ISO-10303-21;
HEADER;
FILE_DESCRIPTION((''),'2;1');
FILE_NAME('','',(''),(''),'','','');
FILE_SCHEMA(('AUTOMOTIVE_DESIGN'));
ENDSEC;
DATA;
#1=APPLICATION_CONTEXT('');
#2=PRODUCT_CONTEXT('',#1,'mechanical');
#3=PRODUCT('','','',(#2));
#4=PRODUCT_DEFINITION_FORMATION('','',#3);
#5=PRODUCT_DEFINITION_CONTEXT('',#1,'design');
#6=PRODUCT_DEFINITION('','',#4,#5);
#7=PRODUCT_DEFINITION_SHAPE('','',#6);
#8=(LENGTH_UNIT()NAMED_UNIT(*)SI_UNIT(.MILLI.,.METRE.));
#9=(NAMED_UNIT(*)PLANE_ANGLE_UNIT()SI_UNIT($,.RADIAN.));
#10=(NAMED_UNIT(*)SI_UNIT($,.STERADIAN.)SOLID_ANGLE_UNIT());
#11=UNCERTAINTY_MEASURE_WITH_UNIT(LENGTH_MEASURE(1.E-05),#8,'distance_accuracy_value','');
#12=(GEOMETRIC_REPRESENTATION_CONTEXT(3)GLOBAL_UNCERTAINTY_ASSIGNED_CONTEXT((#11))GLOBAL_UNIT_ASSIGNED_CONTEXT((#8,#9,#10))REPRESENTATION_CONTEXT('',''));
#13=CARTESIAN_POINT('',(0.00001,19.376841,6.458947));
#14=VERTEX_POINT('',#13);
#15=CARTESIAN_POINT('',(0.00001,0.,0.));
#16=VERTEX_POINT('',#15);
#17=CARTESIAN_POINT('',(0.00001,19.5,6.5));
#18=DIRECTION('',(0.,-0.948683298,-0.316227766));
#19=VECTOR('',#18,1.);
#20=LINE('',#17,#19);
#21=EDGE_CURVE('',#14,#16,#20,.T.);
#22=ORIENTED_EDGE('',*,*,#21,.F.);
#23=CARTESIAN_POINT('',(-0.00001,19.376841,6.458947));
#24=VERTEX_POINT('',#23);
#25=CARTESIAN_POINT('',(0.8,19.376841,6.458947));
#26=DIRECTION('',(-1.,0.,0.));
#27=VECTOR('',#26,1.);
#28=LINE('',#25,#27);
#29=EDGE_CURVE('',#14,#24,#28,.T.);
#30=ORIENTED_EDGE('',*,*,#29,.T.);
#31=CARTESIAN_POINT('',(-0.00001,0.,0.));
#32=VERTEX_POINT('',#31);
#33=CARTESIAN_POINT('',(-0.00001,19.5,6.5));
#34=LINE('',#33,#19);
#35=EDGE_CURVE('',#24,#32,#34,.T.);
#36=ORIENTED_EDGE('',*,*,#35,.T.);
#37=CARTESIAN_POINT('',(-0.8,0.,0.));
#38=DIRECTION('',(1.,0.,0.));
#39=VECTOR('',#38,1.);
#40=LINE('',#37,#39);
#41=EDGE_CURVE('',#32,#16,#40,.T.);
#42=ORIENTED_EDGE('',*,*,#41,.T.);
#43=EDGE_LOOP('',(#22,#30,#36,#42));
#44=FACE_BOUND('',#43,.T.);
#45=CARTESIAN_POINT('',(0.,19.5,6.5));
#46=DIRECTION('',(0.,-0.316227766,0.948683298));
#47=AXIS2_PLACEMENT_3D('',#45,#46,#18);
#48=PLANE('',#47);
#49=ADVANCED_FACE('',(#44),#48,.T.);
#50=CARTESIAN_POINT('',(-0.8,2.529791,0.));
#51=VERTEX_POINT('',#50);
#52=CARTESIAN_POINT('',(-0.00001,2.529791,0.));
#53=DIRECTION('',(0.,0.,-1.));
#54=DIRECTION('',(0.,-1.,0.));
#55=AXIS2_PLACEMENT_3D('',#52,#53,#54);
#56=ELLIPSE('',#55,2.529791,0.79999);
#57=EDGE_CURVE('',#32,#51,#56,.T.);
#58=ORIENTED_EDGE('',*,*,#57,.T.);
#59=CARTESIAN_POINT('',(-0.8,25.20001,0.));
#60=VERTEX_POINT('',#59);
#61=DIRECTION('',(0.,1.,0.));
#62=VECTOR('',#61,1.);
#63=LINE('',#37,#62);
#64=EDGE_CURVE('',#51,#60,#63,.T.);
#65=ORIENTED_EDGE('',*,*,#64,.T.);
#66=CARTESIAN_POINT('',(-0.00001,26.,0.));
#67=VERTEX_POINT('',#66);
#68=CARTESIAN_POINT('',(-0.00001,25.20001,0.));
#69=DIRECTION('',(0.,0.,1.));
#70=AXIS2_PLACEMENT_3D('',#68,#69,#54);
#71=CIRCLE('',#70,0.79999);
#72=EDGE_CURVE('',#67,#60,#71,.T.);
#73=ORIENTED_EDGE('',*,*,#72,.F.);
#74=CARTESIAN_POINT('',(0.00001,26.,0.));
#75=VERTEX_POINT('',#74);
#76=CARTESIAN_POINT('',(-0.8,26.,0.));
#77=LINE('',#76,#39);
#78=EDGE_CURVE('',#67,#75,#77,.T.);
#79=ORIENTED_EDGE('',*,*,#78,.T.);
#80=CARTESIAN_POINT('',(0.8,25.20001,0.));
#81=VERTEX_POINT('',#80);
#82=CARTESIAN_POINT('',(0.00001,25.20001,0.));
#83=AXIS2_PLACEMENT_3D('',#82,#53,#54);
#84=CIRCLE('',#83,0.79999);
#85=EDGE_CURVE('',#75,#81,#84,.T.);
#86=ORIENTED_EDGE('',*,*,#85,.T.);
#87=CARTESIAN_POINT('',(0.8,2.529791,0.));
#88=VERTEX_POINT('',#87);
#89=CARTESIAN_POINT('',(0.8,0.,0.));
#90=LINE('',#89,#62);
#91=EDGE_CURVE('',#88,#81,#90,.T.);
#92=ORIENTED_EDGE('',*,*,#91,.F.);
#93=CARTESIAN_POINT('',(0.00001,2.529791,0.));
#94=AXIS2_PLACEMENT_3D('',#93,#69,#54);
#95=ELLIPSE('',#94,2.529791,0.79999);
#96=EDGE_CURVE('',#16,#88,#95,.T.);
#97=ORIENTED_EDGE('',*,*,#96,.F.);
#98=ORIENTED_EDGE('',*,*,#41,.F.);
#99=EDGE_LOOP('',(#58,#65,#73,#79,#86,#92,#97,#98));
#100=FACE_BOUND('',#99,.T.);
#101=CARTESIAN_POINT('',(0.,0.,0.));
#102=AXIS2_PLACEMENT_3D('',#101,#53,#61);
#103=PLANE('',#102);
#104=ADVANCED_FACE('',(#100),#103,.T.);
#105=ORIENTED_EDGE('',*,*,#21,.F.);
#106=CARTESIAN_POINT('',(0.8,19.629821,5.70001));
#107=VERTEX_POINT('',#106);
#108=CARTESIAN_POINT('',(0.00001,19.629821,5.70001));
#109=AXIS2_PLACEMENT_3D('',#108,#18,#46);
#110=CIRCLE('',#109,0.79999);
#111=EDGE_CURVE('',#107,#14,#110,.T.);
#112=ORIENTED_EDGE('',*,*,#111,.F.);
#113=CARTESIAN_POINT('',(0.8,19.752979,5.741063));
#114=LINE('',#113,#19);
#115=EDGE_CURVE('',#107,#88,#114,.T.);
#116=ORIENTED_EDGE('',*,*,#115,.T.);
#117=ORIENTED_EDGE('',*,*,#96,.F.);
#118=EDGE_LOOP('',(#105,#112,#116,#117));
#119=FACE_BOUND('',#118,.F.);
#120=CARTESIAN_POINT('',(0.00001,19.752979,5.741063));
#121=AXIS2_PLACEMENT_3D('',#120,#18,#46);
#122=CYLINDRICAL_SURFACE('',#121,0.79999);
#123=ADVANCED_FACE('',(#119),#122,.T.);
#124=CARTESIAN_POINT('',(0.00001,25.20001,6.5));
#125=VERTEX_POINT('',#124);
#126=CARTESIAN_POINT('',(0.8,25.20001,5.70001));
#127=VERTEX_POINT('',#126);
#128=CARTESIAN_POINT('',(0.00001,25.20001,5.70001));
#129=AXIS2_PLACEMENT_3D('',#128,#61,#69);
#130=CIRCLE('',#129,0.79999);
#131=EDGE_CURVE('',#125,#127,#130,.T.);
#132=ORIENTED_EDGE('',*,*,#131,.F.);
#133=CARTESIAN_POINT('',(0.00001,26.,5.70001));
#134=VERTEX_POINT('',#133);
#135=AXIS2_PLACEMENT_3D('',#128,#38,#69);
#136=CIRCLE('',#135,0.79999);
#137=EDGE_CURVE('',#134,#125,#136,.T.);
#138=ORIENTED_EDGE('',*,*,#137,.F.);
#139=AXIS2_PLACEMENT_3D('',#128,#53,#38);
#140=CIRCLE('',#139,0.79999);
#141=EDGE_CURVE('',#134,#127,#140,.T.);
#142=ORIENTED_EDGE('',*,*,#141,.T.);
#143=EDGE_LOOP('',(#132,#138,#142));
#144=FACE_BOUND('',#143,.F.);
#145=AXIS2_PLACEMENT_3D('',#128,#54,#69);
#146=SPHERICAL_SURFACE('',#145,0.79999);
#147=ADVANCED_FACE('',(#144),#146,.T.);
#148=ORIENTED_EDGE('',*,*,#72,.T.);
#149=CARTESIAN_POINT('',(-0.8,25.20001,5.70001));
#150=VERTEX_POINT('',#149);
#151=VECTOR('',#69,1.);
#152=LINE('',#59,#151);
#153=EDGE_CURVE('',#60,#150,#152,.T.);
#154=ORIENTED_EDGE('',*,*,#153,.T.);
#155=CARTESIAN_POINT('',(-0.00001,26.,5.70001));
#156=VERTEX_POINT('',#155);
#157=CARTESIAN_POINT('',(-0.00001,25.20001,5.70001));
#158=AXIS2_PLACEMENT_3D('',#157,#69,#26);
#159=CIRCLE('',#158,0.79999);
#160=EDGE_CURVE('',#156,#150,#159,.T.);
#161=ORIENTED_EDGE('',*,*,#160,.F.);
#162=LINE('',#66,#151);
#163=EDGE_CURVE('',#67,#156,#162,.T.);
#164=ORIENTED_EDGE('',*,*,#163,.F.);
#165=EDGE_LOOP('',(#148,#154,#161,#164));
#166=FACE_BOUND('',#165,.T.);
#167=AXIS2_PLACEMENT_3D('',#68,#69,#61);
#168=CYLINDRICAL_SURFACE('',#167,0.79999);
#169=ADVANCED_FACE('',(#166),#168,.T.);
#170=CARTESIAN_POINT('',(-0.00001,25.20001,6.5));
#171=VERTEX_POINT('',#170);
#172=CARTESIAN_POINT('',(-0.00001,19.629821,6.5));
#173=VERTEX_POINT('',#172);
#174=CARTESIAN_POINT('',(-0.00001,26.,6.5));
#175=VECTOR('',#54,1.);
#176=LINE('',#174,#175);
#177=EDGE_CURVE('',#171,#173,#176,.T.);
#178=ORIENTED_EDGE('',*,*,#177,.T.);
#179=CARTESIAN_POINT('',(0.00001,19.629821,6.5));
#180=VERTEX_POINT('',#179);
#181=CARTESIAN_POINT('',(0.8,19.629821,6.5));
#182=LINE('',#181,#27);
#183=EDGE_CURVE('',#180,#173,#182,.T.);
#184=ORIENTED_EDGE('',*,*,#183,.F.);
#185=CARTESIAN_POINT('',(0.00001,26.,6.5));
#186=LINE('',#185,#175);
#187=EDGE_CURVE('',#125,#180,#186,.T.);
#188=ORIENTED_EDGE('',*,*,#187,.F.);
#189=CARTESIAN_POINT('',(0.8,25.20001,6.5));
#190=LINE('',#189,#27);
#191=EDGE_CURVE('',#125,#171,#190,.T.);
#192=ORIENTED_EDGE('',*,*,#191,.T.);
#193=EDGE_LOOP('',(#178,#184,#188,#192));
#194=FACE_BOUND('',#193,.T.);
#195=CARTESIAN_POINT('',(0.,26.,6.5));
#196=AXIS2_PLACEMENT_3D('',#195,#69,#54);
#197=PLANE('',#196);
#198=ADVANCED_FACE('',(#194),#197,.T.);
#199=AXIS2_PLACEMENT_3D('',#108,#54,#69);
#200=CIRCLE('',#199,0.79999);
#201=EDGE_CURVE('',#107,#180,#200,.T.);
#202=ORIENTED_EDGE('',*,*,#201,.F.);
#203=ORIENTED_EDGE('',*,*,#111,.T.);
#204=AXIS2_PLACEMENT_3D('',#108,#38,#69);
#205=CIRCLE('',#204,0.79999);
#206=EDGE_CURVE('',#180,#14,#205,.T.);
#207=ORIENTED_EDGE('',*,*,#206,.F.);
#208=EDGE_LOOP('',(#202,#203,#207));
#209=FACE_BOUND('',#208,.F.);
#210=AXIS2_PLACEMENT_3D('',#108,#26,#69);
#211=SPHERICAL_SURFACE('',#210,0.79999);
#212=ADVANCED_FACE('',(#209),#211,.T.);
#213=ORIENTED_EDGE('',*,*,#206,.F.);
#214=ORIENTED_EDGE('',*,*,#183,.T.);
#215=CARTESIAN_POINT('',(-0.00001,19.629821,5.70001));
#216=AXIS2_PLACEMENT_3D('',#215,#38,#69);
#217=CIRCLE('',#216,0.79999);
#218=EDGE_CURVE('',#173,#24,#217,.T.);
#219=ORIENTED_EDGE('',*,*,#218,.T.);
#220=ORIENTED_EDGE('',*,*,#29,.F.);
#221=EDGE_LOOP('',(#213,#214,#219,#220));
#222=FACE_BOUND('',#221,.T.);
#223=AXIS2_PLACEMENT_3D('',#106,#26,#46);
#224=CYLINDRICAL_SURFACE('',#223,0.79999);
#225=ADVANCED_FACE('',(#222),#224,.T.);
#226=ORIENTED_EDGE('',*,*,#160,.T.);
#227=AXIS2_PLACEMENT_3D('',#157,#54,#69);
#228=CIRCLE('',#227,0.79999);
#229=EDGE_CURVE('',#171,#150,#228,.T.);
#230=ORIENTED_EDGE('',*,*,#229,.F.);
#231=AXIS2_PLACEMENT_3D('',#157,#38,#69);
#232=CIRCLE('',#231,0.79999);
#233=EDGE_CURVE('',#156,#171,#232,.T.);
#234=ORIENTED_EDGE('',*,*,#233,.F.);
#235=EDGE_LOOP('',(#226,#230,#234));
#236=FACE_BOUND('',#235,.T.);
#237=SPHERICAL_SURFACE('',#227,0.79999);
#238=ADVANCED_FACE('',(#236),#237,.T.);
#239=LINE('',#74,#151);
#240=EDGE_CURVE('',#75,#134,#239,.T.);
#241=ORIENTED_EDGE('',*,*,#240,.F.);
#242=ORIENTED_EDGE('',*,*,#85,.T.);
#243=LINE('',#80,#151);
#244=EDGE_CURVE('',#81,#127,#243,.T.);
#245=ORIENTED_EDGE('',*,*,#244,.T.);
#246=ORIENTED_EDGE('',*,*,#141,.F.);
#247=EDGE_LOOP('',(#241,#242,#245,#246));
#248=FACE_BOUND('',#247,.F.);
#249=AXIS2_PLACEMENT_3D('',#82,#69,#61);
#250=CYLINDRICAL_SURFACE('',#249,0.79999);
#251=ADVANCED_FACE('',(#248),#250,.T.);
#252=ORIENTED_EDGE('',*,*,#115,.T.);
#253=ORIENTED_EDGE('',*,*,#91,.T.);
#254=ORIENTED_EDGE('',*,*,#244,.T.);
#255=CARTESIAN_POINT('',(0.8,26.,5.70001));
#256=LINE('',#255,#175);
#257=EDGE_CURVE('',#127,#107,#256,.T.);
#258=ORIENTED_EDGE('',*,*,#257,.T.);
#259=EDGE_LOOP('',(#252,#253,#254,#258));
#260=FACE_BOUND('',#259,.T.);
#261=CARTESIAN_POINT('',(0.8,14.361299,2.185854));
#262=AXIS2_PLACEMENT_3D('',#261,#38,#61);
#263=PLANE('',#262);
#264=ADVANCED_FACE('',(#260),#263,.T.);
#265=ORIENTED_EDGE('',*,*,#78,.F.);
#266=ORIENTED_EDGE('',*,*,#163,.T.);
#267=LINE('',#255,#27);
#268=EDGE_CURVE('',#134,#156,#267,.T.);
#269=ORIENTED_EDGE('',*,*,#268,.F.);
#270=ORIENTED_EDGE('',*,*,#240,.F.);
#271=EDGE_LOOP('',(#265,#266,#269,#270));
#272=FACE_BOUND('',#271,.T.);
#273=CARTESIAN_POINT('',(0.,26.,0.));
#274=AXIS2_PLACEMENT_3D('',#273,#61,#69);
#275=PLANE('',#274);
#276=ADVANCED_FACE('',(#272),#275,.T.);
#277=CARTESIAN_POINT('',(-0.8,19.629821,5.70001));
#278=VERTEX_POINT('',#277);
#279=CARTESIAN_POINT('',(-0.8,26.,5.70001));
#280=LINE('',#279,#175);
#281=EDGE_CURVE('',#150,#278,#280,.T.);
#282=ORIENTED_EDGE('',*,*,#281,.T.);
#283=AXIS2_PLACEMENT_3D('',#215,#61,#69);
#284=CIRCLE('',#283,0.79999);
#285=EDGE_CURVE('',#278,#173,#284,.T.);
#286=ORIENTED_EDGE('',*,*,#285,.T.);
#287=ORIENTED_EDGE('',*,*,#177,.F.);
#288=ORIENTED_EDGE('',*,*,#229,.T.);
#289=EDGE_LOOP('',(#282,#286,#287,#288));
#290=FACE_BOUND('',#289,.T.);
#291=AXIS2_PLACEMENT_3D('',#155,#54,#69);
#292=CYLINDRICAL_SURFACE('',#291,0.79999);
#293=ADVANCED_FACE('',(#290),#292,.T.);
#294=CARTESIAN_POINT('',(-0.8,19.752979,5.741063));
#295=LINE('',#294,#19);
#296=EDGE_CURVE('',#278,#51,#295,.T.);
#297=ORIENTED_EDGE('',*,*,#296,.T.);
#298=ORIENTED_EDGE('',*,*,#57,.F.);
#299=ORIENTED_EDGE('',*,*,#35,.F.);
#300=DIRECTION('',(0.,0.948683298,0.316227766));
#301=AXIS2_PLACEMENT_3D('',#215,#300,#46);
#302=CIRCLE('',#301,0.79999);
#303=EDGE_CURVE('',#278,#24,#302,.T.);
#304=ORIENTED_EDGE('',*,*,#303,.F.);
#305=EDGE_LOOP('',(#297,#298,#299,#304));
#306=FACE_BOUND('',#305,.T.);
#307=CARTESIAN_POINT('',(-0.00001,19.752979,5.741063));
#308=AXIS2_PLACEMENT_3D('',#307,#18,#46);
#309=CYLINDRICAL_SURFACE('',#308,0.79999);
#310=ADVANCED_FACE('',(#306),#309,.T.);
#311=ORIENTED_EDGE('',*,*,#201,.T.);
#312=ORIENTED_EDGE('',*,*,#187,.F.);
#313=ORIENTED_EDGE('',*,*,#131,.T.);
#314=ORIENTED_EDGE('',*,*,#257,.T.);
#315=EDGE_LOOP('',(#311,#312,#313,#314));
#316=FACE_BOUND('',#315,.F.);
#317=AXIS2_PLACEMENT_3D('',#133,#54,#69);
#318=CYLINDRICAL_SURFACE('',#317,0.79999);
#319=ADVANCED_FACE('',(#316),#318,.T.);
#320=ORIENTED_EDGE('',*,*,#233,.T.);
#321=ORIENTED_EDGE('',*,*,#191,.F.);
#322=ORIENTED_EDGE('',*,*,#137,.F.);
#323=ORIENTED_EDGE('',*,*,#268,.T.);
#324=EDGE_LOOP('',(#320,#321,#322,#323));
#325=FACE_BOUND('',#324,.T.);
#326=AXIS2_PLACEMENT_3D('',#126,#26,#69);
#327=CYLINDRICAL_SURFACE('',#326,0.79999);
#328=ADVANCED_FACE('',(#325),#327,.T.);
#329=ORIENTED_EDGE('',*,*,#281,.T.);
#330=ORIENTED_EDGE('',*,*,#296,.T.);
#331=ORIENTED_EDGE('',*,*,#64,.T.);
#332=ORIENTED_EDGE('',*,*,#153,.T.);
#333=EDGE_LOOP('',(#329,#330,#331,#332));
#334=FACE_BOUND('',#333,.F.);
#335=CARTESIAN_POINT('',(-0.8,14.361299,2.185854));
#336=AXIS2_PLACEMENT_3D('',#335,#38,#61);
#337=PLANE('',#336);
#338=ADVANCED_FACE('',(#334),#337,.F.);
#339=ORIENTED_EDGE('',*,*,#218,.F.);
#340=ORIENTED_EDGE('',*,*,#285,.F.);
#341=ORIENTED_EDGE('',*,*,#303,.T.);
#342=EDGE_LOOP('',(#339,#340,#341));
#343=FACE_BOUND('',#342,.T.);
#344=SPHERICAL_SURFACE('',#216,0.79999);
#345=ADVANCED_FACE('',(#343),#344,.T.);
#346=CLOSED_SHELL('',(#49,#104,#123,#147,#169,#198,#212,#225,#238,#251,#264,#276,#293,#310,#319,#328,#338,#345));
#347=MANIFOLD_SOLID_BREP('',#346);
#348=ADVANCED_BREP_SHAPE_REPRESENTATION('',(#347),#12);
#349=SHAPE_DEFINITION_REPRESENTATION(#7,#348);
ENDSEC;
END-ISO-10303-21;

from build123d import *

# Parameters (mm, degrees)
F1_DEPTH = 0.8
F2_R     = 0.79999


# Not quite as in the source:
# - a fillet or chamfer is up to 0.001 mm smaller than in the source, because OpenCascade refuses the exact size


with BuildPart() as f1:
    # F0 (on Right) → F1 (new body, symmetric)
    with BuildSketch(Plane.YZ):
        Polygon((19.5, 6.5), (0, 0), (26, 0), (26, 6.5), align=None)
    extrude(amount=F1_DEPTH, both=True)

    # F2 (radius 0.8 in the source; OpenCascade refuses exactly that, so slightly less here)
    f2_edges = [f1.edges().sort_by_distance(p)[0] for p in [
        (0.8, 22.75, 6.5),
        (0.8, 9.75, 3.25),
        (-0.8, 22.75, 6.5),
        (-0.8, 9.75, 3.25),
        (0, 19.5, 6.5),
        (0, 26, 6.5),
        (0.8, 26, 3.25),
        (-0.8, 26, 3.25),
    ]]
    fillet(f2_edges, radius=F2_R)


solid = f1.part
